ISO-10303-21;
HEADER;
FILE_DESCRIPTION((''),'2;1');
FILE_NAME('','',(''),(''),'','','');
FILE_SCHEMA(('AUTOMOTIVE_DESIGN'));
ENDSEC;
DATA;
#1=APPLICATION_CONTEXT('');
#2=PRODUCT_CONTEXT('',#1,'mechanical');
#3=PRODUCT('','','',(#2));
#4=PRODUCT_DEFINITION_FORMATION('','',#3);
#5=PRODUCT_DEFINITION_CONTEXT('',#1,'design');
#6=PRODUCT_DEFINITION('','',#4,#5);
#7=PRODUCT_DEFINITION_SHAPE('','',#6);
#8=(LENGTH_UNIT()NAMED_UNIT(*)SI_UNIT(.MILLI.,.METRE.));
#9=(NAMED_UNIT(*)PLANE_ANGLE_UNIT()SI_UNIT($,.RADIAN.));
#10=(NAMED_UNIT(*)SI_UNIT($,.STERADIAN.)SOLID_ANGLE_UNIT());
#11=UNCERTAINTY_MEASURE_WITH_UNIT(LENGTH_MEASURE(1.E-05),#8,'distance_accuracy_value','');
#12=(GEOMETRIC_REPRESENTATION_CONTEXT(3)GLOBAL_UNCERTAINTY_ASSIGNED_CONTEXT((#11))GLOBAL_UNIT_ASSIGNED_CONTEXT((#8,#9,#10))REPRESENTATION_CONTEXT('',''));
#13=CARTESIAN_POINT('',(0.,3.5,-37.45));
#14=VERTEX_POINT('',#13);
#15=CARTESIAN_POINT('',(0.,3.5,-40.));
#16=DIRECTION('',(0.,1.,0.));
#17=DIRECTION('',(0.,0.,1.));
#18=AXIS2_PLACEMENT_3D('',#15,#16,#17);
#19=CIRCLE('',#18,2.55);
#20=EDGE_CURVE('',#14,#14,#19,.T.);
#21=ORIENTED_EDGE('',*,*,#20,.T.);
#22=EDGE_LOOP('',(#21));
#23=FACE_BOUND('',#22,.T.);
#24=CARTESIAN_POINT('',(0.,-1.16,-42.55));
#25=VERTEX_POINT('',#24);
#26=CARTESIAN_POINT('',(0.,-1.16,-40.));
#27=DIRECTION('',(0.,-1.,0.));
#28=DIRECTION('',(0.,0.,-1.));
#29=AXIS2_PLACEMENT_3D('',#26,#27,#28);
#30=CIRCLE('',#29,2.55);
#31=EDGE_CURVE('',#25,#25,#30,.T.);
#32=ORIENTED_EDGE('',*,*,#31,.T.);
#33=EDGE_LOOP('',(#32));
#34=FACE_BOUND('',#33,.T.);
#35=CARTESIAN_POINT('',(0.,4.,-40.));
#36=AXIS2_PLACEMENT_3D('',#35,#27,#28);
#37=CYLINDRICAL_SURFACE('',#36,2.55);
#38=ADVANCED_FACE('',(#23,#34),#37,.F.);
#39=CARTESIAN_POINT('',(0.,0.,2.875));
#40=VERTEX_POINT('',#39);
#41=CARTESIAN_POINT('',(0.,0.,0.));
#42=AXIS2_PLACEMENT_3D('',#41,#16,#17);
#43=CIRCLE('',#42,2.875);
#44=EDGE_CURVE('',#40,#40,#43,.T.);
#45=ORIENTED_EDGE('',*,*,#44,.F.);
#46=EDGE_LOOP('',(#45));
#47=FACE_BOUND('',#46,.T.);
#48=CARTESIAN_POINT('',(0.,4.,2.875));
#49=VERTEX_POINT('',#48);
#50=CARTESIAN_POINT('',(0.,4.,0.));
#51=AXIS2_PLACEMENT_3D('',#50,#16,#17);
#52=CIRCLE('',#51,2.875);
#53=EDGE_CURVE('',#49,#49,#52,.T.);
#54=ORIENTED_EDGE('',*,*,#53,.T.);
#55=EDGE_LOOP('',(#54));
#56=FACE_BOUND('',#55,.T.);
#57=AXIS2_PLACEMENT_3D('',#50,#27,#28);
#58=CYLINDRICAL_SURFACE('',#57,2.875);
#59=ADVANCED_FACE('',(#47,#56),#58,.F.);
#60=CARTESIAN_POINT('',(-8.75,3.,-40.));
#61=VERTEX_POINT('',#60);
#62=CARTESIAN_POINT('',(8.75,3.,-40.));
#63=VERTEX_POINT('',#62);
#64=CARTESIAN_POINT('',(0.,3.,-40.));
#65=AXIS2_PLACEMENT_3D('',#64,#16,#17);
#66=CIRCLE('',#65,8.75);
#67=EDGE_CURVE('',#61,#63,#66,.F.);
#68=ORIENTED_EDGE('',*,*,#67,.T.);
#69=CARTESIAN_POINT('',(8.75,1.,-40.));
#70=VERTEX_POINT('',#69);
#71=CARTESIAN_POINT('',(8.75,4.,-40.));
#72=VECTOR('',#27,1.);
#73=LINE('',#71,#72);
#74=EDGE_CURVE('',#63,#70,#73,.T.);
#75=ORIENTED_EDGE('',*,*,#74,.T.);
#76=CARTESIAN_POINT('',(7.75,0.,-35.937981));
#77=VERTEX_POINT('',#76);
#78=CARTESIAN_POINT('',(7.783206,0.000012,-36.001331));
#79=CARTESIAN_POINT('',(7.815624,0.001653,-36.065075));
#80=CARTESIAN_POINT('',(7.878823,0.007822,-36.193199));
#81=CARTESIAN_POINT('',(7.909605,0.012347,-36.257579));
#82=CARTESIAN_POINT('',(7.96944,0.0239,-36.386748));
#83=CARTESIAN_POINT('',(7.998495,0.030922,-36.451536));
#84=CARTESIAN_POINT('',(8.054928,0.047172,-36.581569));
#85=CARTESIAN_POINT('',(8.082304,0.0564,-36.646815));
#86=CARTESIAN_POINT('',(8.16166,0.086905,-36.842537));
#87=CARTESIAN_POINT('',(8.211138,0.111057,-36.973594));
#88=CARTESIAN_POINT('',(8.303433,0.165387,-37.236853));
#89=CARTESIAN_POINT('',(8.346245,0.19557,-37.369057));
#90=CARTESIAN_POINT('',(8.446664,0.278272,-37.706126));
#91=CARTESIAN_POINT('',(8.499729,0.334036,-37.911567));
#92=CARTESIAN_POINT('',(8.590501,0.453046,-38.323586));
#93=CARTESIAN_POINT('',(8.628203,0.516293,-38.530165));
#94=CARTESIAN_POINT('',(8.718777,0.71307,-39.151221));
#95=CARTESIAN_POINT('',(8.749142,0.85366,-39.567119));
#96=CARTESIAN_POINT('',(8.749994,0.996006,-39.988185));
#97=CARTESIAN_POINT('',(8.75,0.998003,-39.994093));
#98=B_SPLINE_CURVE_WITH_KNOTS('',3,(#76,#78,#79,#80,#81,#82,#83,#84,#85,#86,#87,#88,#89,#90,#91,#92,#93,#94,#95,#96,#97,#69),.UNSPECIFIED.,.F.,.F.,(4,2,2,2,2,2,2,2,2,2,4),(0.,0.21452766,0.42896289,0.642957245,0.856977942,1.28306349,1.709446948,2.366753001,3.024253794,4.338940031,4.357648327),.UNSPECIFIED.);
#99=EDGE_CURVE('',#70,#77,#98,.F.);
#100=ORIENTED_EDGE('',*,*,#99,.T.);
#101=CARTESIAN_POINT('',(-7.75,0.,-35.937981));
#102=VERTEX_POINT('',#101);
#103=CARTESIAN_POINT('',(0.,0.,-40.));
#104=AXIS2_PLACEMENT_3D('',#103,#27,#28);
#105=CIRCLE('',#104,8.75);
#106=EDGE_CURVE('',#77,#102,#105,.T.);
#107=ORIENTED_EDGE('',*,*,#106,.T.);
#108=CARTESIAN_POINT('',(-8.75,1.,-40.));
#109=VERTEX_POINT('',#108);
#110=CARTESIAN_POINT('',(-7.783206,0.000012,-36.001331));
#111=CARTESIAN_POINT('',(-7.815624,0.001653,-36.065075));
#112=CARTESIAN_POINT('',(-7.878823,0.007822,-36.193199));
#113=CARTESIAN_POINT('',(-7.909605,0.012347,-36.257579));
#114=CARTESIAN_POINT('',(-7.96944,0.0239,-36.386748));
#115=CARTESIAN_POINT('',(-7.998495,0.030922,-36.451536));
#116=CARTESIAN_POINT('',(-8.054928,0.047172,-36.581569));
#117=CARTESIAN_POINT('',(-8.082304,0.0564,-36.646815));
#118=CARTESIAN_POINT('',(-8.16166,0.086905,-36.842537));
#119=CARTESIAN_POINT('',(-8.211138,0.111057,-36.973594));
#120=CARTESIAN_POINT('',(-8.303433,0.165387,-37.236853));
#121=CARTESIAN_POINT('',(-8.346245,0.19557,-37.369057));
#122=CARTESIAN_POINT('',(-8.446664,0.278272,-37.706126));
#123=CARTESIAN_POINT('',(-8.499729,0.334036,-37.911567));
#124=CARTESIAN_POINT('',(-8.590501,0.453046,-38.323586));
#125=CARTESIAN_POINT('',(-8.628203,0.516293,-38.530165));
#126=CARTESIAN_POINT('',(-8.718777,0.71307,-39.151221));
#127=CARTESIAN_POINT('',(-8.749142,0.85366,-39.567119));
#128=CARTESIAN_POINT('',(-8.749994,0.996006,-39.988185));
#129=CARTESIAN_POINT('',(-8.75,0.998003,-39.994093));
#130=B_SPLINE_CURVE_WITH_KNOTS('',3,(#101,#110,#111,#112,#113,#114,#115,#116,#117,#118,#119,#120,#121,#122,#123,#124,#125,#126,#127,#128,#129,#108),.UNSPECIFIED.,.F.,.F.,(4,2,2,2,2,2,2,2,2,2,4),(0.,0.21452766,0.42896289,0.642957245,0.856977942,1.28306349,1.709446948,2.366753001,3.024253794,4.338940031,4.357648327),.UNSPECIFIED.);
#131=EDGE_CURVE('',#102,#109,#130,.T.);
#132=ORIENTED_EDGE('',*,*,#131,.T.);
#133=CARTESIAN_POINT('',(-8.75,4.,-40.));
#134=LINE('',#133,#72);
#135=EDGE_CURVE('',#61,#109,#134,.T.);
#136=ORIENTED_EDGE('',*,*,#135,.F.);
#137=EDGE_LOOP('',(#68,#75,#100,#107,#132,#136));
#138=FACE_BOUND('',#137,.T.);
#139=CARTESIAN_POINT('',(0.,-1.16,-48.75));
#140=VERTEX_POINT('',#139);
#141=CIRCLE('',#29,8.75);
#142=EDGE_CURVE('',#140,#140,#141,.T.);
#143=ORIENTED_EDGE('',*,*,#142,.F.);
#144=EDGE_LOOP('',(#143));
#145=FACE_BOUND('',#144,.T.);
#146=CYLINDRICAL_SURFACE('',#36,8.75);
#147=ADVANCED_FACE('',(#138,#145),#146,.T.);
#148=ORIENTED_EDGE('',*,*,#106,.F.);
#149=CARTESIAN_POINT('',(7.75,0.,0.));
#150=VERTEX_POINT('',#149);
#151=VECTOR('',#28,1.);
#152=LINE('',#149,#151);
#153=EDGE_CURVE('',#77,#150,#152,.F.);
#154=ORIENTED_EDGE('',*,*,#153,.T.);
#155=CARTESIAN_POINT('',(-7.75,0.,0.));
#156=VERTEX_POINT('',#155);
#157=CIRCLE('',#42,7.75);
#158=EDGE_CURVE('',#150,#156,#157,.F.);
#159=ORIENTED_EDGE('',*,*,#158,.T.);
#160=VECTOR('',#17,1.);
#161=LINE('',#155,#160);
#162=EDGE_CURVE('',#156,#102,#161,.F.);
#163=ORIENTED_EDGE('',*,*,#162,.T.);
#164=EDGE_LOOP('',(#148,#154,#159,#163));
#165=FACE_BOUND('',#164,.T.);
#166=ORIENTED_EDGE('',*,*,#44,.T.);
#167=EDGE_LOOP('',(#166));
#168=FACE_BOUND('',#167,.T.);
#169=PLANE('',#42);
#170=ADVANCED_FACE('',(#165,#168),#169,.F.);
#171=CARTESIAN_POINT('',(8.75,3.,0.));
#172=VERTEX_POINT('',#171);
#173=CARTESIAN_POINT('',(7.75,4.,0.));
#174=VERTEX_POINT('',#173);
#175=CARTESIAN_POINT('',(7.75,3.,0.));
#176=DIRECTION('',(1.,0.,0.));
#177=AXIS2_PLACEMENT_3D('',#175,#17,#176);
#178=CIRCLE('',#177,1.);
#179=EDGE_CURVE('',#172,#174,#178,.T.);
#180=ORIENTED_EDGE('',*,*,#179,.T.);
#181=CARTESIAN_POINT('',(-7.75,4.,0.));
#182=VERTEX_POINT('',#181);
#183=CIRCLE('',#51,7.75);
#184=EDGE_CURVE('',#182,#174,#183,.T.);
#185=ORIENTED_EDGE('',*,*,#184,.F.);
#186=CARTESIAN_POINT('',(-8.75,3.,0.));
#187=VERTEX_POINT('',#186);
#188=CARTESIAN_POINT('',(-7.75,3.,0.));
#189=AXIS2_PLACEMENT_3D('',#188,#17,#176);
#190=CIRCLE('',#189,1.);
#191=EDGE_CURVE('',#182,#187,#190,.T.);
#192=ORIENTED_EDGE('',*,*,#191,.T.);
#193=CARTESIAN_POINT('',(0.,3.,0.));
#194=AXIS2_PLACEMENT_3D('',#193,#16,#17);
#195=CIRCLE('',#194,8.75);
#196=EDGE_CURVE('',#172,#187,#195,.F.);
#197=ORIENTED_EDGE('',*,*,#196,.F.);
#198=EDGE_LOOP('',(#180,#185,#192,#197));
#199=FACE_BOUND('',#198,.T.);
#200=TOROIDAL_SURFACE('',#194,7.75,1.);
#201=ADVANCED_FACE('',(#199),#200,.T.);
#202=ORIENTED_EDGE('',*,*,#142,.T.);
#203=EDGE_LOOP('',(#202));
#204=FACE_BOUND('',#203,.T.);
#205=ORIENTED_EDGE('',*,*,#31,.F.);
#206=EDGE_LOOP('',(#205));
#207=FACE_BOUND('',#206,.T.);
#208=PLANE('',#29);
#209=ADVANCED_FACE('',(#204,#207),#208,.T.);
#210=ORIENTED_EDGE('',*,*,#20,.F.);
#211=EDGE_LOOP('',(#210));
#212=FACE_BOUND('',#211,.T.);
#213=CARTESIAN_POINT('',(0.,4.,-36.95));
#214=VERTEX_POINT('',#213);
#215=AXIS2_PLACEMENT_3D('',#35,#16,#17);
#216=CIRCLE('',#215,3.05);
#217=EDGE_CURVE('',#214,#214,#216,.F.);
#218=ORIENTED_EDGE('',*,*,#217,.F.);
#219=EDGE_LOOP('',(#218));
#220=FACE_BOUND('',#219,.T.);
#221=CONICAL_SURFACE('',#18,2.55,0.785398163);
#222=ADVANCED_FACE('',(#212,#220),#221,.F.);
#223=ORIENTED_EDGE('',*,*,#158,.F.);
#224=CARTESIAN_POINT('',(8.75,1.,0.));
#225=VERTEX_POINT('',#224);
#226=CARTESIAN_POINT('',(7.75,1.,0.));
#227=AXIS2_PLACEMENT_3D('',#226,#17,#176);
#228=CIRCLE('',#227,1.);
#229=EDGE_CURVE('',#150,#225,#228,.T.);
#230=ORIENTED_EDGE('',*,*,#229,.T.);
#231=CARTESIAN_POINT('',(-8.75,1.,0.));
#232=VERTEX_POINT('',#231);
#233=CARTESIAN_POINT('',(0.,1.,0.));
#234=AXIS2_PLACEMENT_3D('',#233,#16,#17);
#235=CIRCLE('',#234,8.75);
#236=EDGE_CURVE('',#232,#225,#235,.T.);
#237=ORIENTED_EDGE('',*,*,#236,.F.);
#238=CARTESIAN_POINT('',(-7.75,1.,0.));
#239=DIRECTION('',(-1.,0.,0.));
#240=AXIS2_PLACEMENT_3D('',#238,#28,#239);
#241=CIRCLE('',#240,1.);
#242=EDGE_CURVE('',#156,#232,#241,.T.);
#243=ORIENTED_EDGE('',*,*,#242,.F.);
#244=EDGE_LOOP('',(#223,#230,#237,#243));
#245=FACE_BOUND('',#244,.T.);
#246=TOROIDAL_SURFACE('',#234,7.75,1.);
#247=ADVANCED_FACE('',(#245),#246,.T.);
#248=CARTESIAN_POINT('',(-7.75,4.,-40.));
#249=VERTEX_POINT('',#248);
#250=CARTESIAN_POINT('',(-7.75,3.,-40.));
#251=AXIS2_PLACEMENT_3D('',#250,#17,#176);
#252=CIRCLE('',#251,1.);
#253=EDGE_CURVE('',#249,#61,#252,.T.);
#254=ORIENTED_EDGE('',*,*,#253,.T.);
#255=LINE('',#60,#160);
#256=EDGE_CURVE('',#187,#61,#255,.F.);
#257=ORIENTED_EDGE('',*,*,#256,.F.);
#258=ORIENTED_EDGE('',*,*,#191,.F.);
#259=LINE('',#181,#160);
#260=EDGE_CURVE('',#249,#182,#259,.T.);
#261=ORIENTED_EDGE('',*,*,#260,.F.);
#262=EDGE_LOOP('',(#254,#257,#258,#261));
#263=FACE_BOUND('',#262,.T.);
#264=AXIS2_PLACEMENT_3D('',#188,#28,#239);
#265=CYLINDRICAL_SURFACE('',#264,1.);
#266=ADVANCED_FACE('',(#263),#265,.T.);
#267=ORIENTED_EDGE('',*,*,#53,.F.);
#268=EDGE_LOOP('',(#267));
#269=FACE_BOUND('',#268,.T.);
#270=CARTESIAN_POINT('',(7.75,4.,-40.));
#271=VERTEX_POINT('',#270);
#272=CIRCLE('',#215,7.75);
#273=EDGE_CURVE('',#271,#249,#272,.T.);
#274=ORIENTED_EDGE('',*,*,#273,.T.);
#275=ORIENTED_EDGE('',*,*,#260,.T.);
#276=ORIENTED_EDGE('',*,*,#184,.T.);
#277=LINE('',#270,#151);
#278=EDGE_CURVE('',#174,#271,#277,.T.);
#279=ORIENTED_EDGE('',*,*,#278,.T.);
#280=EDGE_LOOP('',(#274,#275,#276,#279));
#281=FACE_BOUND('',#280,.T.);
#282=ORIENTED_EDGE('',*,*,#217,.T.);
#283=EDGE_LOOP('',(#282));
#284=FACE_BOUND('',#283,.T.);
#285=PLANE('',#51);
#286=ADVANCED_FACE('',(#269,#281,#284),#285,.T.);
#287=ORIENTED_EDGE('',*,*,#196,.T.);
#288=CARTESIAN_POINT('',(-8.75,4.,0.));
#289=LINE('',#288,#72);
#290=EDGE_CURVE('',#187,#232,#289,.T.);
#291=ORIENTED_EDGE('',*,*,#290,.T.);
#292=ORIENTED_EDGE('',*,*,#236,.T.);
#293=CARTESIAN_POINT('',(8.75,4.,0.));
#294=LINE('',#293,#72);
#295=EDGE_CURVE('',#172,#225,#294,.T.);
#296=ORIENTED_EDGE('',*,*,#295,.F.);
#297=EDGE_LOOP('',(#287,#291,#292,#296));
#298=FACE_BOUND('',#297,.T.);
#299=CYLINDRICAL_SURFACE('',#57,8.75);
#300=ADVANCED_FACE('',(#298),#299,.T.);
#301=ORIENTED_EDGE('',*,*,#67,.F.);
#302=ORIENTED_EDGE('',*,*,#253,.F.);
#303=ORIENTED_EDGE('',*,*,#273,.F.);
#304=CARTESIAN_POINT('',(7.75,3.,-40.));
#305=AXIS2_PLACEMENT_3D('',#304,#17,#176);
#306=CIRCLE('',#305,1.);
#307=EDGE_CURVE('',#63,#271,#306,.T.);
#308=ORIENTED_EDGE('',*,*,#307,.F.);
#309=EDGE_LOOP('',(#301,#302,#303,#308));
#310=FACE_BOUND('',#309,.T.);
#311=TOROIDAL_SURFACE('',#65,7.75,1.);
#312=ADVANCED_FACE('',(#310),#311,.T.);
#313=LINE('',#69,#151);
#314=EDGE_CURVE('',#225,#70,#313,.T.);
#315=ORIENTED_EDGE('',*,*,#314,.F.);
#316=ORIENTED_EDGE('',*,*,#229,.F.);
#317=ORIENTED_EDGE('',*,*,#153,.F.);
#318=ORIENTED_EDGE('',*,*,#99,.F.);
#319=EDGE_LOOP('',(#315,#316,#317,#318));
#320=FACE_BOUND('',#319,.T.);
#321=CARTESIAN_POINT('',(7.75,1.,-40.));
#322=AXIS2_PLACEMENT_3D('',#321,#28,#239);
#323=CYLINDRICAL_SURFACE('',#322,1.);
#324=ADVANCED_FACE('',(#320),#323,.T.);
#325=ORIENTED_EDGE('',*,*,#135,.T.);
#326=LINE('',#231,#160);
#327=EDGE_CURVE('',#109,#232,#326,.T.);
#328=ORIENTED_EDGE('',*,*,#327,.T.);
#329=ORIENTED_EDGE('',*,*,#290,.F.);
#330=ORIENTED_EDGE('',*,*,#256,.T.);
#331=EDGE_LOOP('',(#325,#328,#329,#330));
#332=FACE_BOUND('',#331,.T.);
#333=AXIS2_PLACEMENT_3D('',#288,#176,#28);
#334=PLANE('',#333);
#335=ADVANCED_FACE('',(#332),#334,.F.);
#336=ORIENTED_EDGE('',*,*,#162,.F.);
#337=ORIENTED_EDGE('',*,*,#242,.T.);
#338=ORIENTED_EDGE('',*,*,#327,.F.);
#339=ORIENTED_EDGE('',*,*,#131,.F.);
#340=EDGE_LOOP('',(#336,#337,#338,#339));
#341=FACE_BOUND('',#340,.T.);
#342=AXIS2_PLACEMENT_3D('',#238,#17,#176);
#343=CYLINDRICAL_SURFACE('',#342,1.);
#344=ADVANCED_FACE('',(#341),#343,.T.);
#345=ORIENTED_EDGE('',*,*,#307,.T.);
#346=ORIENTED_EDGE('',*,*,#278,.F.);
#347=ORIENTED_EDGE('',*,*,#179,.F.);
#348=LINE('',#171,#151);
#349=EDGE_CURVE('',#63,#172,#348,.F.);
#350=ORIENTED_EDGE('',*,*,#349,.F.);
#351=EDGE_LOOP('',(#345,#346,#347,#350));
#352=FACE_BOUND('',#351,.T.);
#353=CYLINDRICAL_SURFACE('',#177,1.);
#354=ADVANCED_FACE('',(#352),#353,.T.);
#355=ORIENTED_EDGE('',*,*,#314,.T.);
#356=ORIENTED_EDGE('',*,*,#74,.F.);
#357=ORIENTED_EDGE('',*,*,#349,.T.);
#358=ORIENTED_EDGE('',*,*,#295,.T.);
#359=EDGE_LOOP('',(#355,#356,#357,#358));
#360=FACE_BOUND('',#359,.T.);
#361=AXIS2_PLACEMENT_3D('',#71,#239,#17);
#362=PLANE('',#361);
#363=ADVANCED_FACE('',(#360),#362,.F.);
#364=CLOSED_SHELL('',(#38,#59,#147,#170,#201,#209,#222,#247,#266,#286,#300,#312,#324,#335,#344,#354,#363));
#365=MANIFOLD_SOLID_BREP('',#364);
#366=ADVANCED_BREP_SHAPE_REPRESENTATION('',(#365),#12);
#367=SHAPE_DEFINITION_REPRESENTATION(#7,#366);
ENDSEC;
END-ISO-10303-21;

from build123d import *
from build123d.topology import SkipClean

# Parameters (mm, degrees)
SKETCH1_R           = 2.55
SKETCH1_R_2         = 2.875
BOSS_EXTRUDE1_DEPTH = 4
BOSS_EXTRUDE2_START = 5
SKETCH3_R           = 8.75
SKETCH3_R_2         = 2.55
BOSS_EXTRUDE2_DEPTH = 5
FILLET2_R           = 1
SKETCH5_R           = 8.75
CUT_EXTRUDE2_DEPTH  = 3.84


with BuildPart() as part:
    # Sketch1 → Boss-Extrude1 (new body)
    with BuildSketch(Plane(origin=(0, 0, 0), x_dir=(1, 0, 0), z_dir=(0, 1, 0))):
        with BuildLine():
            Line((-8.75, 0), (-8.75, 40))
            ThreePointArc((-8.75, 40), (0, 48.75), (8.75, 40))
            Line((8.75, 40), (8.75, 0))
            ThreePointArc((8.75, 0), (0, -8.75), (-8.75, 0))
        make_face()
        with Locations(Location((0, 40, 0), (0, 0, 270))):
            Circle(SKETCH1_R, mode=Mode.SUBTRACT)
        with Locations(Location((0, 0, 0), (0, 0, 270))):
            Circle(SKETCH1_R_2, mode=Mode.SUBTRACT)
    extrude(amount=BOSS_EXTRUDE1_DEPTH)

    # Sketch3 → Boss-Extrude2 (add)
    with SkipClean():  # the faces are left unmerged after this step: merging them gives an invalid solid
        with BuildSketch(Plane.XZ.offset(BOSS_EXTRUDE2_START)):
            with Locations(Location((0, -40, 0), (0, 0, 270))):
                Circle(SKETCH3_R)
            with Locations(Location((0, -40, 0), (0, 0, 270))):
                Circle(SKETCH3_R_2, mode=Mode.SUBTRACT)
        extrude(amount=-BOSS_EXTRUDE2_DEPTH)

    # Fillet2
    # the kernel refuses this fillet: 1 mm, written as the material it takes off along each edge
    with BuildSketch(Plane(origin=(0, 4, -40), x_dir=(-1, 0, 0), z_dir=(0, 0, 1))) as fillet2_piece_1:
        with BuildLine():
            CenterArc((8.75 - FILLET2_R, FILLET2_R), FILLET2_R, 270, 90)
            Line((8.75 - FILLET2_R, 0), (8.75, 0))
            Line((8.75, 0), (8.75, FILLET2_R))
        make_face()
    revolve(axis=Axis((0, 4, -40), (0, -1, 0)), revolution_arc=180, mode=Mode.SUBTRACT)
    with BuildSketch(Plane(origin=(-8.75, 4, 0), x_dir=(1, 0, 0), z_dir=(0, 0, -1))) as fillet2_piece_2:
        with BuildLine():
            CenterArc((FILLET2_R, FILLET2_R), FILLET2_R, 180, 90)
            Line((0, FILLET2_R), (0, 0))
            Line((0, 0), (FILLET2_R, 0))
        make_face()
    extrude(amount=40, mode=Mode.SUBTRACT)
    with BuildSketch(Plane(origin=(0, -5, -40), x_dir=(0, 0, -1), z_dir=(-1, 0, 0))) as fillet2_piece_3:
        with BuildLine():
            CenterArc((8.75 - FILLET2_R, -FILLET2_R), FILLET2_R, 0, 90)
            Line((8.75 - FILLET2_R, 0), (8.75, 0))
            Line((8.75, 0), (8.75, -FILLET2_R))
        make_face()
    revolve(axis=Axis((0, -5, -40), (0, -1, 0)), mode=Mode.SUBTRACT)
    with BuildSketch(Plane(origin=(0, 4, 0), x_dir=(1, 0, 0), z_dir=(0, 0, -1))) as fillet2_piece_4:
        with BuildLine():
            CenterArc((8.75 - FILLET2_R, FILLET2_R), FILLET2_R, 270, 90)
            Line((8.75 - FILLET2_R, 0), (8.75, 0))
            Line((8.75, 0), (8.75, FILLET2_R))
        make_face()
    revolve(axis=Axis((0, 4, 0), (0, -1, 0)), revolution_arc=180, mode=Mode.SUBTRACT)
    with BuildSketch(Plane(origin=(-8.75, 0, 0), x_dir=(1, 0, 0), z_dir=(0, 0, -1))) as fillet2_piece_5_section:
        with BuildLine():
            CenterArc((FILLET2_R, -FILLET2_R), FILLET2_R, 90, 90)
            Line((0, -FILLET2_R), (0, 0))
            Line((0, 0), (FILLET2_R, 0))
        make_face()
    fillet2_piece_5 = extrude(amount=44.25, mode=Mode.PRIVATE)
    fillet2_piece_5 = fillet2_piece_5 - Plane(origin=(0, 0, -40), x_dir=(0, 0, -1), z_dir=(0, -1, 0)) * Cylinder(8.75, 93, mode=Mode.PRIVATE)
    add(fillet2_piece_5, mode=Mode.SUBTRACT)
    with BuildSketch(Plane(origin=(8.75, 0, -44.25), x_dir=(0, 1, 0), z_dir=(0, 0, 1))) as fillet2_piece_6_section:
        with BuildLine():
            CenterArc((FILLET2_R, FILLET2_R), FILLET2_R, 180, 90)
            Line((0, FILLET2_R), (0, 0))
            Line((0, 0), (FILLET2_R, 0))
        make_face()
    fillet2_piece_6 = extrude(amount=44.25, mode=Mode.PRIVATE)
    fillet2_piece_6 = fillet2_piece_6 - Plane(origin=(0, 0, -40), x_dir=(0, 0, -1), z_dir=(0, -1, 0)) * Cylinder(8.75, 93, mode=Mode.PRIVATE)
    add(fillet2_piece_6, mode=Mode.SUBTRACT)
    with BuildSketch(Plane(origin=(0, 0, 0), x_dir=(1, 0, 0), z_dir=(0, 0, -1))) as fillet2_piece_7:
        with BuildLine():
            CenterArc((8.75 - FILLET2_R, -FILLET2_R), FILLET2_R, 0, 90)
            Line((8.75 - FILLET2_R, 0), (8.75, 0))
            Line((8.75, 0), (8.75, -FILLET2_R))
        make_face()
    revolve(axis=Axis((0, 0, 0), (0, -1, 0)), revolution_arc=180, mode=Mode.SUBTRACT)
    with BuildSketch(Plane(origin=(8.75, 4, -40), x_dir=(0, -1, 0), z_dir=(0, 0, 1))) as fillet2_piece_8:
        with BuildLine():
            CenterArc((FILLET2_R, -FILLET2_R), FILLET2_R, 90, 90)
            Line((0, -FILLET2_R), (0, 0))
            Line((0, 0), (FILLET2_R, 0))
        make_face()
    extrude(amount=40, mode=Mode.SUBTRACT)

    # Chamfer1: read off the stored shape, not the designer's step
    # Chamfer1 outline → Chamfer1 (revolve, cut)
    with BuildSketch(Plane.XY.offset(-40)):
        Polygon((3.05, -5), (2.55, -4.5), (2.55, -5), align=None)
        Polygon((2.55, 4), (2.55, 3.5), (3.05, 4), align=None)
    revolve(axis=Axis((0, 0, -40), (0, 1, 0)), mode=Mode.SUBTRACT)

    # Sketch5 → Cut-Extrude2 (cut)
    with BuildSketch(Plane.XZ.offset(5)):
        with Locations(Location((0, -40, 0), (0, 0, 270))):
            Circle(SKETCH5_R)
    extrude(amount=-CUT_EXTRUDE2_DEPTH, mode=Mode.SUBTRACT)


solid = part.part
